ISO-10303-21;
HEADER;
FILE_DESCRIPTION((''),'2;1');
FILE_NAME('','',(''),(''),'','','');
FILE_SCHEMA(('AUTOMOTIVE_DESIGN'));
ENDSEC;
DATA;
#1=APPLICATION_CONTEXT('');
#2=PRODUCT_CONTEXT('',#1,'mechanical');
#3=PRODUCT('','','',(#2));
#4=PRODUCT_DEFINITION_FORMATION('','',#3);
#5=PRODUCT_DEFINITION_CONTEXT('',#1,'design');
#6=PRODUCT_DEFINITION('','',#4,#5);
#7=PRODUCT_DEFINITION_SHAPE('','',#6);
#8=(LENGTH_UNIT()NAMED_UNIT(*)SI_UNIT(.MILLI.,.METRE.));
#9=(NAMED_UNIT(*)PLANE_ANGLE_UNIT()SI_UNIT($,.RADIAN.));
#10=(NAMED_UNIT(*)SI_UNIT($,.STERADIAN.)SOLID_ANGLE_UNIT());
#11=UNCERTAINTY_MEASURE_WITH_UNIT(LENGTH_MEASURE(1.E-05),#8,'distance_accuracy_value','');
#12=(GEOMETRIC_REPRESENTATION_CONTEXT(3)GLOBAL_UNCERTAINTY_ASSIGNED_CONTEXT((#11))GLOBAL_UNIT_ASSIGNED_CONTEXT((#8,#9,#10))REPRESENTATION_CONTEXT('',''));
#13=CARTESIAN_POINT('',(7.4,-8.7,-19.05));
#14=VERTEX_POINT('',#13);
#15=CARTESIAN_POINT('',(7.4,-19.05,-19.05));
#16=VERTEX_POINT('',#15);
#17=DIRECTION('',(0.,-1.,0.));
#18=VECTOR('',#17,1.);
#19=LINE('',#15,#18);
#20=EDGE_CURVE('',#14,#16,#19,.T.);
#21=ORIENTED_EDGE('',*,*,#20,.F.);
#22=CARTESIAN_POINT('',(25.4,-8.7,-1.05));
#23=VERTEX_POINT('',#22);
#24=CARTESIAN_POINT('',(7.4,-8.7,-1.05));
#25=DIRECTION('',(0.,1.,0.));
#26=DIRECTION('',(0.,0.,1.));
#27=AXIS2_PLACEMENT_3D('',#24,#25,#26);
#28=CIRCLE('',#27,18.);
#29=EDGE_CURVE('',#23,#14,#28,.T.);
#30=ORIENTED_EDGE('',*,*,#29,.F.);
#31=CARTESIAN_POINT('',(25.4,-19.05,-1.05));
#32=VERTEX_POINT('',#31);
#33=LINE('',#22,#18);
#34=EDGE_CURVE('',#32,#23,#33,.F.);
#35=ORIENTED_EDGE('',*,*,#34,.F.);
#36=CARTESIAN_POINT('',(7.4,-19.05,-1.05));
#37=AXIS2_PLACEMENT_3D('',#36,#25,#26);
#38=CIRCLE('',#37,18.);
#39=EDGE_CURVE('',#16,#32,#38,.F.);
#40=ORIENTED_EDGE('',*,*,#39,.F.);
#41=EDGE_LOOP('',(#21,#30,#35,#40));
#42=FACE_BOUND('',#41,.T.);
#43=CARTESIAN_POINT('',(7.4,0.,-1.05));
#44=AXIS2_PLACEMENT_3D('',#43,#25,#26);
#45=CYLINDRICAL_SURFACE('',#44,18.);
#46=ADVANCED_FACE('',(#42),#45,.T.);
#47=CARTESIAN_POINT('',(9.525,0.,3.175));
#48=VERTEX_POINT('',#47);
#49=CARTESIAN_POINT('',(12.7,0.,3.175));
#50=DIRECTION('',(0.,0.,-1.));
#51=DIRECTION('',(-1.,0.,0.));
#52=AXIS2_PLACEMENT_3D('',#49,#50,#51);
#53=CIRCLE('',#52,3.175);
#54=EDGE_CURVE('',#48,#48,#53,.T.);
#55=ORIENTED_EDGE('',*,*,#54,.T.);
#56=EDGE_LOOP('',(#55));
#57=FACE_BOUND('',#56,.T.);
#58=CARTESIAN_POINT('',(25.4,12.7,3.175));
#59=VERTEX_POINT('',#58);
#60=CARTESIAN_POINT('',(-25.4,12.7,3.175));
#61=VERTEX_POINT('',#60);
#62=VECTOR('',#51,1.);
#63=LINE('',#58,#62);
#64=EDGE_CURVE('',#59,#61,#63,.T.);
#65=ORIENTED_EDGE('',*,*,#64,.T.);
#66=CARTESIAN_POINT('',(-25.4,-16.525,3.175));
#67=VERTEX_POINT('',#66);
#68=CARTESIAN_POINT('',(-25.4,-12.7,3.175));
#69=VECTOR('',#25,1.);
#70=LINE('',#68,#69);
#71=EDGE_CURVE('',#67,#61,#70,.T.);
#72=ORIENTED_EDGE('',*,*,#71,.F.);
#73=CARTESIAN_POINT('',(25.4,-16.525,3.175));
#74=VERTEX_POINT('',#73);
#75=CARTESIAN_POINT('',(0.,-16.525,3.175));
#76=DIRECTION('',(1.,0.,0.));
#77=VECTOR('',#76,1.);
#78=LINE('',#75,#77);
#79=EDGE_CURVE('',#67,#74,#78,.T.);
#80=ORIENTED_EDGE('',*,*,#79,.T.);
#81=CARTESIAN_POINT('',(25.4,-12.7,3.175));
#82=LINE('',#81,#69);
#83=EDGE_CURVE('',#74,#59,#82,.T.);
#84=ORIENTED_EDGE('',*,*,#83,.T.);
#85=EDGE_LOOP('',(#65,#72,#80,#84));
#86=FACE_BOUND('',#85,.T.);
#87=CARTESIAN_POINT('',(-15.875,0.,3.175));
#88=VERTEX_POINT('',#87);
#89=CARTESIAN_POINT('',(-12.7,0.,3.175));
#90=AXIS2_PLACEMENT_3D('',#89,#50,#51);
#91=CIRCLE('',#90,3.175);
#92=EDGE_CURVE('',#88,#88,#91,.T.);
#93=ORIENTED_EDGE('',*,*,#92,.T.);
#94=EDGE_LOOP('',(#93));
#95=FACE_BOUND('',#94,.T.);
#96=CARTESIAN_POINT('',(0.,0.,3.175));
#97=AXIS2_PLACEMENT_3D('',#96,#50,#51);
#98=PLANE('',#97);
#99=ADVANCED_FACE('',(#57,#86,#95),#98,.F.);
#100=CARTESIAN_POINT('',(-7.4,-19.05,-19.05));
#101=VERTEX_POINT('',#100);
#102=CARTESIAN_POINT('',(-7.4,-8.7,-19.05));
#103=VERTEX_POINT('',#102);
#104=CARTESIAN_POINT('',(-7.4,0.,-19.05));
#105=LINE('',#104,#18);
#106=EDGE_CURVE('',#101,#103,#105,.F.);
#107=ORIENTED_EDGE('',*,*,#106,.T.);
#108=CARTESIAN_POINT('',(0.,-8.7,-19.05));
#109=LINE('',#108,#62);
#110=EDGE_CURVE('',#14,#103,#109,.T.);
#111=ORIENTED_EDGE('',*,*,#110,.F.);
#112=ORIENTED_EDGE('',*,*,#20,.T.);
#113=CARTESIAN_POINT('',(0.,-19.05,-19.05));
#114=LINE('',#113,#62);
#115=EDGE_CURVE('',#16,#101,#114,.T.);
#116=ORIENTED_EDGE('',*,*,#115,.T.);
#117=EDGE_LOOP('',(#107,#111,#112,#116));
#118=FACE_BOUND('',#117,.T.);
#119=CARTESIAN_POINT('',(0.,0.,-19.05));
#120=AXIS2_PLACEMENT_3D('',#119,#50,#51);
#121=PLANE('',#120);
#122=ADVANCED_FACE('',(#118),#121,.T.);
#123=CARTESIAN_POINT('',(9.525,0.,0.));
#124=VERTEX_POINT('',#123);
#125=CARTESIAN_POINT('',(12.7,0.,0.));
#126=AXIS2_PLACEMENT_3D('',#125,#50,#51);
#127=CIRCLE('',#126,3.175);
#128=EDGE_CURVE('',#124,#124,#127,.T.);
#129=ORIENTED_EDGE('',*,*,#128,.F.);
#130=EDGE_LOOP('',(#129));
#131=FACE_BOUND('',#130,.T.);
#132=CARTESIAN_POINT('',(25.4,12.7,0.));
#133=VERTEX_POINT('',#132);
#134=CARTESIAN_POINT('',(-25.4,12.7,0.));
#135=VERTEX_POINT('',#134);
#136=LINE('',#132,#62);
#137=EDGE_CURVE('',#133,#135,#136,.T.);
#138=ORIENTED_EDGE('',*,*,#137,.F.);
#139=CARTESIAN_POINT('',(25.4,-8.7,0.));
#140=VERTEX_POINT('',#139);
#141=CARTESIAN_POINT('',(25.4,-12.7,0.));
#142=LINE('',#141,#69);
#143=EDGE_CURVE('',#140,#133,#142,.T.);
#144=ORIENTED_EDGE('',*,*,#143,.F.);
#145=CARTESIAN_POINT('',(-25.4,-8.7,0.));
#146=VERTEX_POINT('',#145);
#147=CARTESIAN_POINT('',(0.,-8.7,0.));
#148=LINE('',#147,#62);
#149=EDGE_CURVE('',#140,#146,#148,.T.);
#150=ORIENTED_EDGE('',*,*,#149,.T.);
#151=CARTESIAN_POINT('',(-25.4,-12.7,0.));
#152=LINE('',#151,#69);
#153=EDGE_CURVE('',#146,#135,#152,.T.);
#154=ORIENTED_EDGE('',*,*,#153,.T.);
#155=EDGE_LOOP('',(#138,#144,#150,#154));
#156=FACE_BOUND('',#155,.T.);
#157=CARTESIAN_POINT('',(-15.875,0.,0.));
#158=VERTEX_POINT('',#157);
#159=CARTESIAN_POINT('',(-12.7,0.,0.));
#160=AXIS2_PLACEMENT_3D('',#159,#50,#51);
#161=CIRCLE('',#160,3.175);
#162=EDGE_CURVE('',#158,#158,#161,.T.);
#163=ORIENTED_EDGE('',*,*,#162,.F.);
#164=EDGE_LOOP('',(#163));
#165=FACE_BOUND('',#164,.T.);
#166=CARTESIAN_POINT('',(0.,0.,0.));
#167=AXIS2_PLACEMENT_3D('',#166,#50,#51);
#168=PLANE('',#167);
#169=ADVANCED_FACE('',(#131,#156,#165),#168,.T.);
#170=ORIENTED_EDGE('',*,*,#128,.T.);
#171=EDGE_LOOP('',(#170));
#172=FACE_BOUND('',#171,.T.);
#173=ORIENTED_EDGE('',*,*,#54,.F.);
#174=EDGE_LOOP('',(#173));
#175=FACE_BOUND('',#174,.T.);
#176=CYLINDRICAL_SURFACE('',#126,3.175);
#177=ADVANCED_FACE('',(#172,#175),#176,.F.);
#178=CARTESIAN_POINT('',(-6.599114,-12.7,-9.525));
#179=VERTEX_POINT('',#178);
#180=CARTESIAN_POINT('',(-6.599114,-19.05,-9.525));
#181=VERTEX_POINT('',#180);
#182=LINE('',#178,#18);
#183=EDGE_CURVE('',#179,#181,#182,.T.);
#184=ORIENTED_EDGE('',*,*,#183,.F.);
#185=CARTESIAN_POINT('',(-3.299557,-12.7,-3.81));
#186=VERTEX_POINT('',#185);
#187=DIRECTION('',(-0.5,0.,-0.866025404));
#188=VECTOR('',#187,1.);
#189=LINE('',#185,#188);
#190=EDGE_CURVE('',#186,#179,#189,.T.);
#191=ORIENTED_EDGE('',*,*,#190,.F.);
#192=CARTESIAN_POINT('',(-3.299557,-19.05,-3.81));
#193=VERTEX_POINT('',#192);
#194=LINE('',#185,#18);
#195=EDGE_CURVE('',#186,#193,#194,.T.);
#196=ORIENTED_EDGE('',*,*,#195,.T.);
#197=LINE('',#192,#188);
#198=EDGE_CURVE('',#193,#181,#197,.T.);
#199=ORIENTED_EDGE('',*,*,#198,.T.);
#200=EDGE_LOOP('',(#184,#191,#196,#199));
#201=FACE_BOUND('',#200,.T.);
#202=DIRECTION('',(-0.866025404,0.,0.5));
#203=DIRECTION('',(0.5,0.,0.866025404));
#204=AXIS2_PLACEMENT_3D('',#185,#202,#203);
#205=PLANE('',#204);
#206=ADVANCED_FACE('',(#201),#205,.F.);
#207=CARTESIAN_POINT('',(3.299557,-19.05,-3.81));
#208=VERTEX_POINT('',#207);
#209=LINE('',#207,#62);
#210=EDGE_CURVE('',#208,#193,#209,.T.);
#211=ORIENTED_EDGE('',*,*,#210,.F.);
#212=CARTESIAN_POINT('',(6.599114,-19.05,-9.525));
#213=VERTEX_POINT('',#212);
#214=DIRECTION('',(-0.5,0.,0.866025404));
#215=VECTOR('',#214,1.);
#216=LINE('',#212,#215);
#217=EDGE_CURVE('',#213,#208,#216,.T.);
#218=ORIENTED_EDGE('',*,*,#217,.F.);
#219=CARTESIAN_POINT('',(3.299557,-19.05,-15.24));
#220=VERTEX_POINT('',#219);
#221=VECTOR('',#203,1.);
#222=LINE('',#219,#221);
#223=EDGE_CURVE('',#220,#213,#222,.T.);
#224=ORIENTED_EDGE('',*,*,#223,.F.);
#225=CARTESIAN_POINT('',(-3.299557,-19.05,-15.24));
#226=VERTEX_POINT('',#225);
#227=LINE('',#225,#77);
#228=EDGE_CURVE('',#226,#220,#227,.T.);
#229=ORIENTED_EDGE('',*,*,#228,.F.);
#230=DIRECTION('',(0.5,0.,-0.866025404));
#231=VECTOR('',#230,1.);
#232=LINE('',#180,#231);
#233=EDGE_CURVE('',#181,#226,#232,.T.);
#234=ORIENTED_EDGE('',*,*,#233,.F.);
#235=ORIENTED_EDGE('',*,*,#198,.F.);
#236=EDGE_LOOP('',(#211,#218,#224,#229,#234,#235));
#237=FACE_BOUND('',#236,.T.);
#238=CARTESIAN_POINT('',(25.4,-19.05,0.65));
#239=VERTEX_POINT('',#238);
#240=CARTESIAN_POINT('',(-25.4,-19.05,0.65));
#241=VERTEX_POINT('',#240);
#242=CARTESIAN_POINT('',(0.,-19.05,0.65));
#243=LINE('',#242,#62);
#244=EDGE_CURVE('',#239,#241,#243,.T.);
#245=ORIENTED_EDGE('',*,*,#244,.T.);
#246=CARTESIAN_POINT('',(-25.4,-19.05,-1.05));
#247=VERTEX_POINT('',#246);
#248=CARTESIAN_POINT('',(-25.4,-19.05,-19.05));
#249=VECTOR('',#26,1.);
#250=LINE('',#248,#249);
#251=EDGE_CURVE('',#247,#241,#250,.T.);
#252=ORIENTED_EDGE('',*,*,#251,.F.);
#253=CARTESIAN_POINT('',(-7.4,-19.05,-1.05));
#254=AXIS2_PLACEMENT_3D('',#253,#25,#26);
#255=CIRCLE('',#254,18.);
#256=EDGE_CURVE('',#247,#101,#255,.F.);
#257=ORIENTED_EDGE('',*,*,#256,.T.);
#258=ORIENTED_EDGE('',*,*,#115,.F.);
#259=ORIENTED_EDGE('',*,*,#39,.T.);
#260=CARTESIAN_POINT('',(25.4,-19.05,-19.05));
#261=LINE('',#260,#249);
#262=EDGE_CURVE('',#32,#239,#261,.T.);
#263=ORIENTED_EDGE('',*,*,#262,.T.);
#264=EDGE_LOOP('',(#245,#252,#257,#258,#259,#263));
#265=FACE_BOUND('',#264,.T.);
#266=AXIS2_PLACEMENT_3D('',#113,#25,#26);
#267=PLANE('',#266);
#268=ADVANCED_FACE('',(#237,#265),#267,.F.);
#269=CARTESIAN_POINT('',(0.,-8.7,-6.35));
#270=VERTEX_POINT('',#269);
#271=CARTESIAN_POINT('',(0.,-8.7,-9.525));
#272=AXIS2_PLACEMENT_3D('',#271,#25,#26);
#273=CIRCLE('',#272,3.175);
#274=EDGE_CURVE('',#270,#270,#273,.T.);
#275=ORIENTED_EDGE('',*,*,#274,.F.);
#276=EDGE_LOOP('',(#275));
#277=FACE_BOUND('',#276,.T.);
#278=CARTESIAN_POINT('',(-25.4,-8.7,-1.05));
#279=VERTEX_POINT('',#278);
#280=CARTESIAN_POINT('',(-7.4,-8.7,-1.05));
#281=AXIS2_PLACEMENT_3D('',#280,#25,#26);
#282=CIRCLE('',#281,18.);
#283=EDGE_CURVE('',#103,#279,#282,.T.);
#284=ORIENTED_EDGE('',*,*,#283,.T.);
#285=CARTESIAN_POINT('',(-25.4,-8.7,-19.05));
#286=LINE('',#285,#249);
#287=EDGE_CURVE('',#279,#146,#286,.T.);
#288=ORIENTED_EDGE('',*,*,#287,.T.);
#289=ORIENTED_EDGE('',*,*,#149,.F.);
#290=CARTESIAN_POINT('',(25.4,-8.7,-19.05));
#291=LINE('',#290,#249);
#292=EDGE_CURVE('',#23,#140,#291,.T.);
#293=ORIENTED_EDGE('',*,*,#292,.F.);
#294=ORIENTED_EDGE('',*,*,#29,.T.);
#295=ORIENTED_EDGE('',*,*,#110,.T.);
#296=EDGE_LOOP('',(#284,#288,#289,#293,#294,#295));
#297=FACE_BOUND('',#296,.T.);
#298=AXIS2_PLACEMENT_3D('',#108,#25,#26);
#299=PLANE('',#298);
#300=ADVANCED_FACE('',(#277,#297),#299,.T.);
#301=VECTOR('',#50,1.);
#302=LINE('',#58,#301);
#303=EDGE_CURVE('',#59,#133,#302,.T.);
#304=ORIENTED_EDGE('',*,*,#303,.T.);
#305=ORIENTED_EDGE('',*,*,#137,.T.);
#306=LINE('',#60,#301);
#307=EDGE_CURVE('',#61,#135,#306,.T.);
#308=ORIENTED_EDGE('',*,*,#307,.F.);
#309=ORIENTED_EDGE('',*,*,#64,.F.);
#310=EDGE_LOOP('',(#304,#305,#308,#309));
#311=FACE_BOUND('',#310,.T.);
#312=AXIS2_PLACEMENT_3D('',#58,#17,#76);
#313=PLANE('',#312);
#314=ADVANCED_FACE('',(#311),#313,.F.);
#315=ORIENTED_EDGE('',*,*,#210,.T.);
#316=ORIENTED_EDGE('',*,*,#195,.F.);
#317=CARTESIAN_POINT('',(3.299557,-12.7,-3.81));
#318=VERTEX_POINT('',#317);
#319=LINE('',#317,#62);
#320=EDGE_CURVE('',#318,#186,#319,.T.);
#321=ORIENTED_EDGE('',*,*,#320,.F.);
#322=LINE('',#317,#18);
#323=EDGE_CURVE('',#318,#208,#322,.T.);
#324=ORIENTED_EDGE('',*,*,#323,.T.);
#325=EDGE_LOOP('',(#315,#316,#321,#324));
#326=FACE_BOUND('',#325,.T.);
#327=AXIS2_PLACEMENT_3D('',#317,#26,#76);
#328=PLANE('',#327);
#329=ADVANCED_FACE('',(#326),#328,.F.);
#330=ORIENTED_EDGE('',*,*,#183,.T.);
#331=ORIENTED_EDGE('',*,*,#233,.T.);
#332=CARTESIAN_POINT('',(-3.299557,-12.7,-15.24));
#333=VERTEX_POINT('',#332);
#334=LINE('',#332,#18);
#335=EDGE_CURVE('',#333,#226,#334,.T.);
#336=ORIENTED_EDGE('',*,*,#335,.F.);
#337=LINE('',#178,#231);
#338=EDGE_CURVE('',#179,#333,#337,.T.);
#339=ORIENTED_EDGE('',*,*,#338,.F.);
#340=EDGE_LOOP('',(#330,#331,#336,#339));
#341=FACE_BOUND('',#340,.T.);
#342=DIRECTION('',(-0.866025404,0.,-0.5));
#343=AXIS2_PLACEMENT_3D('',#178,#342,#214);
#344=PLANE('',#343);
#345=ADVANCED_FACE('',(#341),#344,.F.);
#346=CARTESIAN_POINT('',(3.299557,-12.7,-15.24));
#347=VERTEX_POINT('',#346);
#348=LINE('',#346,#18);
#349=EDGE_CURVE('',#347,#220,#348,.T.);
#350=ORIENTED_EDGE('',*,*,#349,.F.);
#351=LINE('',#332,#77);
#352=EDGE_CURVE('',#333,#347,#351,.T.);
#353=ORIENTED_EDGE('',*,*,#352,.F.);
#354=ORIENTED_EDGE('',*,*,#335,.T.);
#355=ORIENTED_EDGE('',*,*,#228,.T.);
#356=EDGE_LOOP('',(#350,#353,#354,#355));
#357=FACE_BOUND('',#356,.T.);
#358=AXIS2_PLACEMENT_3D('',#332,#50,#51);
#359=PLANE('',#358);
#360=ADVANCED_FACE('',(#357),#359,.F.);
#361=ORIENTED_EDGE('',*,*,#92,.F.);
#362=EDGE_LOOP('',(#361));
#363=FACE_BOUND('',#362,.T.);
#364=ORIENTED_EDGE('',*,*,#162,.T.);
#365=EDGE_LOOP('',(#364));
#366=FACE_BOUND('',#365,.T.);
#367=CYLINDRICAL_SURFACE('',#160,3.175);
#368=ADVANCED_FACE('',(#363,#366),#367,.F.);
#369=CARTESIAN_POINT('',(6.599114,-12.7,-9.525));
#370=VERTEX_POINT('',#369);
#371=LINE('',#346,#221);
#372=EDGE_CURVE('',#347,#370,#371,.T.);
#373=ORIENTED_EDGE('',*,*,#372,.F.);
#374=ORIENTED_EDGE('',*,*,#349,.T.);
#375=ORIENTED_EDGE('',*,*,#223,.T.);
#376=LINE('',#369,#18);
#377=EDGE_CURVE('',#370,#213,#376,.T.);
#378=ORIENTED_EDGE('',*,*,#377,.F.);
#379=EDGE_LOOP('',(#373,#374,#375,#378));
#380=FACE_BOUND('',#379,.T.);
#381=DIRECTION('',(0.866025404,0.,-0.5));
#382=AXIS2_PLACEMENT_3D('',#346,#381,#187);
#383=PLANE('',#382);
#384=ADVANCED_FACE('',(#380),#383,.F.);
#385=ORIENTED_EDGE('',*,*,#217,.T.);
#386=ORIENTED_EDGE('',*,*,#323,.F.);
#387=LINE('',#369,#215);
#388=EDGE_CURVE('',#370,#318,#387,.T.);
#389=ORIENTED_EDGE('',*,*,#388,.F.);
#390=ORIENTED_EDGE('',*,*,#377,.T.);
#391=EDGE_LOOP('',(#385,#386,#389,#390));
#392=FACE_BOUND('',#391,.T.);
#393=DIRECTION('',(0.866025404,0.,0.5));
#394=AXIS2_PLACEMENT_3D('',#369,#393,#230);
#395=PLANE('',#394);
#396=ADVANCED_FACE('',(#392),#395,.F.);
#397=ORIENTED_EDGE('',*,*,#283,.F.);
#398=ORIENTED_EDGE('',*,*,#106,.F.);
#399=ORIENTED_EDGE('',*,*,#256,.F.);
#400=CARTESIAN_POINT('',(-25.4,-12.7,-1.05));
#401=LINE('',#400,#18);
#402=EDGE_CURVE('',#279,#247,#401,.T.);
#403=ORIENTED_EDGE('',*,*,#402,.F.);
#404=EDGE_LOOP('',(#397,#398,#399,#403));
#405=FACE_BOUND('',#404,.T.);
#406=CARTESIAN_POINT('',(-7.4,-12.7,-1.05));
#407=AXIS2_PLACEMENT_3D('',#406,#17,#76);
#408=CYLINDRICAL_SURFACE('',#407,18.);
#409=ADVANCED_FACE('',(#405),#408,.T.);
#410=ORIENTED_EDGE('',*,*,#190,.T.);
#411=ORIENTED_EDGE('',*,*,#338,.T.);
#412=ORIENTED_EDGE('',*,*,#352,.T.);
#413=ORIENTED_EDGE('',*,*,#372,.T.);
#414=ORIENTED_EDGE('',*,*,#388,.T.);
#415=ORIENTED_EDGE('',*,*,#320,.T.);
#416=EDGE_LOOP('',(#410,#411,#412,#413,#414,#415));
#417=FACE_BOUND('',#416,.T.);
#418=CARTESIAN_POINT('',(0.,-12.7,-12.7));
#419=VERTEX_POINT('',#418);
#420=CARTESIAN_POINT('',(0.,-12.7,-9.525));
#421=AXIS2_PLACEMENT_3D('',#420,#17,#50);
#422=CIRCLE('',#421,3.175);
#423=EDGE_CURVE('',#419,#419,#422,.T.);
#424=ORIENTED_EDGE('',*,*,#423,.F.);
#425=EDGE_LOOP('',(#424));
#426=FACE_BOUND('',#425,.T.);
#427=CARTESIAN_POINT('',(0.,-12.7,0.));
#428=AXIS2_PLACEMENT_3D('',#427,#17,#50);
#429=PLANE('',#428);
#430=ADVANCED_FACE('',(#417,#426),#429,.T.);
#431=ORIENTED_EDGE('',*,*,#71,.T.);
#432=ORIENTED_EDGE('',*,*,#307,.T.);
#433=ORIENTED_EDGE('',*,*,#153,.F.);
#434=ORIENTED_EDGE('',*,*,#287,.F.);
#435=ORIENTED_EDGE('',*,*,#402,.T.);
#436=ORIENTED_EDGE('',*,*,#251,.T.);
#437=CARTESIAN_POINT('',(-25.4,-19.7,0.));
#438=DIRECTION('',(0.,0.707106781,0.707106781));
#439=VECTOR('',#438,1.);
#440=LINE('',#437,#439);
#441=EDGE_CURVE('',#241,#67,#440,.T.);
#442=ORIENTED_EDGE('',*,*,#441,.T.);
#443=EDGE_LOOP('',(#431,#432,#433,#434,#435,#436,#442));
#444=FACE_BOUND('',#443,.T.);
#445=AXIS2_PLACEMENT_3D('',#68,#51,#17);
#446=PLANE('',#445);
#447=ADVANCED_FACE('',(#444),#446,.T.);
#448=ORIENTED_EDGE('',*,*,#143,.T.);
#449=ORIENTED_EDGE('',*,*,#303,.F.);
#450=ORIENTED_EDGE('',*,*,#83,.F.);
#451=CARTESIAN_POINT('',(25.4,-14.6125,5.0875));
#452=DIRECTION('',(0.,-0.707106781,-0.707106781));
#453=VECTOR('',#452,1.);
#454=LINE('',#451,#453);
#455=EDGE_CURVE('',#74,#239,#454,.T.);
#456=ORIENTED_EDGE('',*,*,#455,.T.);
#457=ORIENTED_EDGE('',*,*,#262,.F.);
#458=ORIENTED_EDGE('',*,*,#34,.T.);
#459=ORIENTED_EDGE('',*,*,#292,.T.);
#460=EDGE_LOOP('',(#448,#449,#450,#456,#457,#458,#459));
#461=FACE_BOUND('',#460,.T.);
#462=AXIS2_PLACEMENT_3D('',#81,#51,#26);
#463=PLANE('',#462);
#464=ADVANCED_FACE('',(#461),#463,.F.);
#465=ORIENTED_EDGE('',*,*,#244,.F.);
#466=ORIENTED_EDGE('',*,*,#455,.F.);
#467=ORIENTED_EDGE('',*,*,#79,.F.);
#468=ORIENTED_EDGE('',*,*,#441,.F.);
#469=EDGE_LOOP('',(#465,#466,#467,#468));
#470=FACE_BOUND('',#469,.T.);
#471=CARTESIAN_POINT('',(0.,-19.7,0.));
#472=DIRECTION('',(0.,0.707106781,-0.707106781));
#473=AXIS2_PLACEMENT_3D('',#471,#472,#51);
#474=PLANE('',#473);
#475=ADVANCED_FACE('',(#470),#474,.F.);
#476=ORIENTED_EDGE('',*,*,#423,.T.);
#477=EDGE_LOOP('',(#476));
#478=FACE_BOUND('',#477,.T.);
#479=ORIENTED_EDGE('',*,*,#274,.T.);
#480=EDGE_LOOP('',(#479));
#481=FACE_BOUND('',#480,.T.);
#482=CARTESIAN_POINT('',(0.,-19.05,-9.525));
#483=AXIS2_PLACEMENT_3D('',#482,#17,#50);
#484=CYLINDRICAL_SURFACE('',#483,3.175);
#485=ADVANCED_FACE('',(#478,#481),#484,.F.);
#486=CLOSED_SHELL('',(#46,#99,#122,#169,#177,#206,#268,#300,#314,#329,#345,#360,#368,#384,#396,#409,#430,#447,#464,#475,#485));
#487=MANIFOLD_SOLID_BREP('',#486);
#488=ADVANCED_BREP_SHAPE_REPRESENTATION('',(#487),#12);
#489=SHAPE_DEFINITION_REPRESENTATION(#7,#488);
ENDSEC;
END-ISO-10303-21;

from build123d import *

# Parameters (mm, degrees)
SKETCH1_W                   = 50.8
SKETCH1_H                   = 25.4
BOSS_EXTRUDE1_DEPTH         = 3.175
F_1_4_0_25_DIAMETER_HOLE1_D = 6.35
SKETCH4_W                   = 50.8
SKETCH4_H                   = 6.35
SKETCH4_H_2                 = 4
BOSS_EXTRUDE2_DEPTH         = 19.05
CUT_EXTRUDE1_DEPTH          = 6.35
F_1_4_0_25_DIAMETER_HOLE2_D = 6.35
FILLET1_R                   = 18
CHAMFER1_SIZE               = 7


with BuildPart() as part:
    # Sketch1 → Boss-Extrude1 (new body)
    with BuildSketch(Plane.XY):
        Rectangle(SKETCH1_W, SKETCH1_H)
    extrude(amount=BOSS_EXTRUDE1_DEPTH)

    # 1/4 (0.25) Diameter Hole1 (through all)
    with Locations(Plane(origin=(0, 0, 0), x_dir=(-1, 0, 0), z_dir=(0, 0, -1))):
        with Locations((-12.7, 0), (12.7, 0)):
            Hole(F_1_4_0_25_DIAMETER_HOLE1_D / 2)

    # Sketch4 → Boss-Extrude2 (add)
    with BuildSketch(Plane(origin=(0, 0, 0), x_dir=(-1, 0, 0), z_dir=(0, 0, -1))):
        with Locations((0, -15.875)):
            Rectangle(SKETCH4_W, SKETCH4_H)
        with Locations((0, -10.7)):
            Rectangle(SKETCH4_W, SKETCH4_H_2)
    extrude(amount=BOSS_EXTRUDE2_DEPTH)

    # Sketch5 → Cut-Extrude1 (cut)
    with BuildSketch(Plane.XZ.offset(19.05)):
        Polygon((-3.299556788, -15.24), (3.299556788, -15.24), (6.599113577, -9.525), (3.299556788, -3.81), (-3.299556788, -3.81), (-6.599113577, -9.525), align=None)
    extrude(amount=-CUT_EXTRUDE1_DEPTH, mode=Mode.SUBTRACT)

    # 1/4 (0.25) Diameter Hole2 (through all)
    with Locations(Plane(origin=(0, -19.05, 0), x_dir=(-1, 0, 0), z_dir=(0, -1, 0))):
        with Locations((0, 9.525)):
            Hole(F_1_4_0_25_DIAMETER_HOLE2_D / 2)

    # Fillet1
    fillet1_edges = [part.edges().sort_by_distance(p)[0] for p in [
        (-25.4, -13.875, -19.05),
        (25.4, -13.875, -19.05),
    ]]
    fillet(fillet1_edges, radius=FILLET1_R)

    # Chamfer1
    # the kernel refuses this chamfer: 7 mm, written as the material it adds along each edge
    with BuildSketch(Plane(origin=(25.4, -12.7, 0), x_dir=(0, -0.9996219169112968, -0.02749587661058637), z_dir=(-1, 0, 0))) as chamfer1_piece_1_section:
        Polygon((CHAMFER1_SIZE * 0.999621916911, CHAMFER1_SIZE * 0.0274958766106), (-CHAMFER1_SIZE * 0.0274958766106, CHAMFER1_SIZE * 0.999621916911), (0, 0), align=None)
    chamfer1_piece_1 = extrude(amount=50.8, mode=Mode.PRIVATE)
    chamfer1_piece_1 = split(chamfer1_piece_1, bisect_by=Plane(origin=(0, -19.05, 1.366790838), z_dir=(0, 1, 0)), keep=Keep.TOP, mode=Mode.PRIVATE)
    chamfer1_piece_1 = split(chamfer1_piece_1, bisect_by=Plane(origin=(0, -15.42419562, 3.175), z_dir=(0, 0, -1)), keep=Keep.TOP, mode=Mode.PRIVATE)
    add(chamfer1_piece_1)


solid = part.part
